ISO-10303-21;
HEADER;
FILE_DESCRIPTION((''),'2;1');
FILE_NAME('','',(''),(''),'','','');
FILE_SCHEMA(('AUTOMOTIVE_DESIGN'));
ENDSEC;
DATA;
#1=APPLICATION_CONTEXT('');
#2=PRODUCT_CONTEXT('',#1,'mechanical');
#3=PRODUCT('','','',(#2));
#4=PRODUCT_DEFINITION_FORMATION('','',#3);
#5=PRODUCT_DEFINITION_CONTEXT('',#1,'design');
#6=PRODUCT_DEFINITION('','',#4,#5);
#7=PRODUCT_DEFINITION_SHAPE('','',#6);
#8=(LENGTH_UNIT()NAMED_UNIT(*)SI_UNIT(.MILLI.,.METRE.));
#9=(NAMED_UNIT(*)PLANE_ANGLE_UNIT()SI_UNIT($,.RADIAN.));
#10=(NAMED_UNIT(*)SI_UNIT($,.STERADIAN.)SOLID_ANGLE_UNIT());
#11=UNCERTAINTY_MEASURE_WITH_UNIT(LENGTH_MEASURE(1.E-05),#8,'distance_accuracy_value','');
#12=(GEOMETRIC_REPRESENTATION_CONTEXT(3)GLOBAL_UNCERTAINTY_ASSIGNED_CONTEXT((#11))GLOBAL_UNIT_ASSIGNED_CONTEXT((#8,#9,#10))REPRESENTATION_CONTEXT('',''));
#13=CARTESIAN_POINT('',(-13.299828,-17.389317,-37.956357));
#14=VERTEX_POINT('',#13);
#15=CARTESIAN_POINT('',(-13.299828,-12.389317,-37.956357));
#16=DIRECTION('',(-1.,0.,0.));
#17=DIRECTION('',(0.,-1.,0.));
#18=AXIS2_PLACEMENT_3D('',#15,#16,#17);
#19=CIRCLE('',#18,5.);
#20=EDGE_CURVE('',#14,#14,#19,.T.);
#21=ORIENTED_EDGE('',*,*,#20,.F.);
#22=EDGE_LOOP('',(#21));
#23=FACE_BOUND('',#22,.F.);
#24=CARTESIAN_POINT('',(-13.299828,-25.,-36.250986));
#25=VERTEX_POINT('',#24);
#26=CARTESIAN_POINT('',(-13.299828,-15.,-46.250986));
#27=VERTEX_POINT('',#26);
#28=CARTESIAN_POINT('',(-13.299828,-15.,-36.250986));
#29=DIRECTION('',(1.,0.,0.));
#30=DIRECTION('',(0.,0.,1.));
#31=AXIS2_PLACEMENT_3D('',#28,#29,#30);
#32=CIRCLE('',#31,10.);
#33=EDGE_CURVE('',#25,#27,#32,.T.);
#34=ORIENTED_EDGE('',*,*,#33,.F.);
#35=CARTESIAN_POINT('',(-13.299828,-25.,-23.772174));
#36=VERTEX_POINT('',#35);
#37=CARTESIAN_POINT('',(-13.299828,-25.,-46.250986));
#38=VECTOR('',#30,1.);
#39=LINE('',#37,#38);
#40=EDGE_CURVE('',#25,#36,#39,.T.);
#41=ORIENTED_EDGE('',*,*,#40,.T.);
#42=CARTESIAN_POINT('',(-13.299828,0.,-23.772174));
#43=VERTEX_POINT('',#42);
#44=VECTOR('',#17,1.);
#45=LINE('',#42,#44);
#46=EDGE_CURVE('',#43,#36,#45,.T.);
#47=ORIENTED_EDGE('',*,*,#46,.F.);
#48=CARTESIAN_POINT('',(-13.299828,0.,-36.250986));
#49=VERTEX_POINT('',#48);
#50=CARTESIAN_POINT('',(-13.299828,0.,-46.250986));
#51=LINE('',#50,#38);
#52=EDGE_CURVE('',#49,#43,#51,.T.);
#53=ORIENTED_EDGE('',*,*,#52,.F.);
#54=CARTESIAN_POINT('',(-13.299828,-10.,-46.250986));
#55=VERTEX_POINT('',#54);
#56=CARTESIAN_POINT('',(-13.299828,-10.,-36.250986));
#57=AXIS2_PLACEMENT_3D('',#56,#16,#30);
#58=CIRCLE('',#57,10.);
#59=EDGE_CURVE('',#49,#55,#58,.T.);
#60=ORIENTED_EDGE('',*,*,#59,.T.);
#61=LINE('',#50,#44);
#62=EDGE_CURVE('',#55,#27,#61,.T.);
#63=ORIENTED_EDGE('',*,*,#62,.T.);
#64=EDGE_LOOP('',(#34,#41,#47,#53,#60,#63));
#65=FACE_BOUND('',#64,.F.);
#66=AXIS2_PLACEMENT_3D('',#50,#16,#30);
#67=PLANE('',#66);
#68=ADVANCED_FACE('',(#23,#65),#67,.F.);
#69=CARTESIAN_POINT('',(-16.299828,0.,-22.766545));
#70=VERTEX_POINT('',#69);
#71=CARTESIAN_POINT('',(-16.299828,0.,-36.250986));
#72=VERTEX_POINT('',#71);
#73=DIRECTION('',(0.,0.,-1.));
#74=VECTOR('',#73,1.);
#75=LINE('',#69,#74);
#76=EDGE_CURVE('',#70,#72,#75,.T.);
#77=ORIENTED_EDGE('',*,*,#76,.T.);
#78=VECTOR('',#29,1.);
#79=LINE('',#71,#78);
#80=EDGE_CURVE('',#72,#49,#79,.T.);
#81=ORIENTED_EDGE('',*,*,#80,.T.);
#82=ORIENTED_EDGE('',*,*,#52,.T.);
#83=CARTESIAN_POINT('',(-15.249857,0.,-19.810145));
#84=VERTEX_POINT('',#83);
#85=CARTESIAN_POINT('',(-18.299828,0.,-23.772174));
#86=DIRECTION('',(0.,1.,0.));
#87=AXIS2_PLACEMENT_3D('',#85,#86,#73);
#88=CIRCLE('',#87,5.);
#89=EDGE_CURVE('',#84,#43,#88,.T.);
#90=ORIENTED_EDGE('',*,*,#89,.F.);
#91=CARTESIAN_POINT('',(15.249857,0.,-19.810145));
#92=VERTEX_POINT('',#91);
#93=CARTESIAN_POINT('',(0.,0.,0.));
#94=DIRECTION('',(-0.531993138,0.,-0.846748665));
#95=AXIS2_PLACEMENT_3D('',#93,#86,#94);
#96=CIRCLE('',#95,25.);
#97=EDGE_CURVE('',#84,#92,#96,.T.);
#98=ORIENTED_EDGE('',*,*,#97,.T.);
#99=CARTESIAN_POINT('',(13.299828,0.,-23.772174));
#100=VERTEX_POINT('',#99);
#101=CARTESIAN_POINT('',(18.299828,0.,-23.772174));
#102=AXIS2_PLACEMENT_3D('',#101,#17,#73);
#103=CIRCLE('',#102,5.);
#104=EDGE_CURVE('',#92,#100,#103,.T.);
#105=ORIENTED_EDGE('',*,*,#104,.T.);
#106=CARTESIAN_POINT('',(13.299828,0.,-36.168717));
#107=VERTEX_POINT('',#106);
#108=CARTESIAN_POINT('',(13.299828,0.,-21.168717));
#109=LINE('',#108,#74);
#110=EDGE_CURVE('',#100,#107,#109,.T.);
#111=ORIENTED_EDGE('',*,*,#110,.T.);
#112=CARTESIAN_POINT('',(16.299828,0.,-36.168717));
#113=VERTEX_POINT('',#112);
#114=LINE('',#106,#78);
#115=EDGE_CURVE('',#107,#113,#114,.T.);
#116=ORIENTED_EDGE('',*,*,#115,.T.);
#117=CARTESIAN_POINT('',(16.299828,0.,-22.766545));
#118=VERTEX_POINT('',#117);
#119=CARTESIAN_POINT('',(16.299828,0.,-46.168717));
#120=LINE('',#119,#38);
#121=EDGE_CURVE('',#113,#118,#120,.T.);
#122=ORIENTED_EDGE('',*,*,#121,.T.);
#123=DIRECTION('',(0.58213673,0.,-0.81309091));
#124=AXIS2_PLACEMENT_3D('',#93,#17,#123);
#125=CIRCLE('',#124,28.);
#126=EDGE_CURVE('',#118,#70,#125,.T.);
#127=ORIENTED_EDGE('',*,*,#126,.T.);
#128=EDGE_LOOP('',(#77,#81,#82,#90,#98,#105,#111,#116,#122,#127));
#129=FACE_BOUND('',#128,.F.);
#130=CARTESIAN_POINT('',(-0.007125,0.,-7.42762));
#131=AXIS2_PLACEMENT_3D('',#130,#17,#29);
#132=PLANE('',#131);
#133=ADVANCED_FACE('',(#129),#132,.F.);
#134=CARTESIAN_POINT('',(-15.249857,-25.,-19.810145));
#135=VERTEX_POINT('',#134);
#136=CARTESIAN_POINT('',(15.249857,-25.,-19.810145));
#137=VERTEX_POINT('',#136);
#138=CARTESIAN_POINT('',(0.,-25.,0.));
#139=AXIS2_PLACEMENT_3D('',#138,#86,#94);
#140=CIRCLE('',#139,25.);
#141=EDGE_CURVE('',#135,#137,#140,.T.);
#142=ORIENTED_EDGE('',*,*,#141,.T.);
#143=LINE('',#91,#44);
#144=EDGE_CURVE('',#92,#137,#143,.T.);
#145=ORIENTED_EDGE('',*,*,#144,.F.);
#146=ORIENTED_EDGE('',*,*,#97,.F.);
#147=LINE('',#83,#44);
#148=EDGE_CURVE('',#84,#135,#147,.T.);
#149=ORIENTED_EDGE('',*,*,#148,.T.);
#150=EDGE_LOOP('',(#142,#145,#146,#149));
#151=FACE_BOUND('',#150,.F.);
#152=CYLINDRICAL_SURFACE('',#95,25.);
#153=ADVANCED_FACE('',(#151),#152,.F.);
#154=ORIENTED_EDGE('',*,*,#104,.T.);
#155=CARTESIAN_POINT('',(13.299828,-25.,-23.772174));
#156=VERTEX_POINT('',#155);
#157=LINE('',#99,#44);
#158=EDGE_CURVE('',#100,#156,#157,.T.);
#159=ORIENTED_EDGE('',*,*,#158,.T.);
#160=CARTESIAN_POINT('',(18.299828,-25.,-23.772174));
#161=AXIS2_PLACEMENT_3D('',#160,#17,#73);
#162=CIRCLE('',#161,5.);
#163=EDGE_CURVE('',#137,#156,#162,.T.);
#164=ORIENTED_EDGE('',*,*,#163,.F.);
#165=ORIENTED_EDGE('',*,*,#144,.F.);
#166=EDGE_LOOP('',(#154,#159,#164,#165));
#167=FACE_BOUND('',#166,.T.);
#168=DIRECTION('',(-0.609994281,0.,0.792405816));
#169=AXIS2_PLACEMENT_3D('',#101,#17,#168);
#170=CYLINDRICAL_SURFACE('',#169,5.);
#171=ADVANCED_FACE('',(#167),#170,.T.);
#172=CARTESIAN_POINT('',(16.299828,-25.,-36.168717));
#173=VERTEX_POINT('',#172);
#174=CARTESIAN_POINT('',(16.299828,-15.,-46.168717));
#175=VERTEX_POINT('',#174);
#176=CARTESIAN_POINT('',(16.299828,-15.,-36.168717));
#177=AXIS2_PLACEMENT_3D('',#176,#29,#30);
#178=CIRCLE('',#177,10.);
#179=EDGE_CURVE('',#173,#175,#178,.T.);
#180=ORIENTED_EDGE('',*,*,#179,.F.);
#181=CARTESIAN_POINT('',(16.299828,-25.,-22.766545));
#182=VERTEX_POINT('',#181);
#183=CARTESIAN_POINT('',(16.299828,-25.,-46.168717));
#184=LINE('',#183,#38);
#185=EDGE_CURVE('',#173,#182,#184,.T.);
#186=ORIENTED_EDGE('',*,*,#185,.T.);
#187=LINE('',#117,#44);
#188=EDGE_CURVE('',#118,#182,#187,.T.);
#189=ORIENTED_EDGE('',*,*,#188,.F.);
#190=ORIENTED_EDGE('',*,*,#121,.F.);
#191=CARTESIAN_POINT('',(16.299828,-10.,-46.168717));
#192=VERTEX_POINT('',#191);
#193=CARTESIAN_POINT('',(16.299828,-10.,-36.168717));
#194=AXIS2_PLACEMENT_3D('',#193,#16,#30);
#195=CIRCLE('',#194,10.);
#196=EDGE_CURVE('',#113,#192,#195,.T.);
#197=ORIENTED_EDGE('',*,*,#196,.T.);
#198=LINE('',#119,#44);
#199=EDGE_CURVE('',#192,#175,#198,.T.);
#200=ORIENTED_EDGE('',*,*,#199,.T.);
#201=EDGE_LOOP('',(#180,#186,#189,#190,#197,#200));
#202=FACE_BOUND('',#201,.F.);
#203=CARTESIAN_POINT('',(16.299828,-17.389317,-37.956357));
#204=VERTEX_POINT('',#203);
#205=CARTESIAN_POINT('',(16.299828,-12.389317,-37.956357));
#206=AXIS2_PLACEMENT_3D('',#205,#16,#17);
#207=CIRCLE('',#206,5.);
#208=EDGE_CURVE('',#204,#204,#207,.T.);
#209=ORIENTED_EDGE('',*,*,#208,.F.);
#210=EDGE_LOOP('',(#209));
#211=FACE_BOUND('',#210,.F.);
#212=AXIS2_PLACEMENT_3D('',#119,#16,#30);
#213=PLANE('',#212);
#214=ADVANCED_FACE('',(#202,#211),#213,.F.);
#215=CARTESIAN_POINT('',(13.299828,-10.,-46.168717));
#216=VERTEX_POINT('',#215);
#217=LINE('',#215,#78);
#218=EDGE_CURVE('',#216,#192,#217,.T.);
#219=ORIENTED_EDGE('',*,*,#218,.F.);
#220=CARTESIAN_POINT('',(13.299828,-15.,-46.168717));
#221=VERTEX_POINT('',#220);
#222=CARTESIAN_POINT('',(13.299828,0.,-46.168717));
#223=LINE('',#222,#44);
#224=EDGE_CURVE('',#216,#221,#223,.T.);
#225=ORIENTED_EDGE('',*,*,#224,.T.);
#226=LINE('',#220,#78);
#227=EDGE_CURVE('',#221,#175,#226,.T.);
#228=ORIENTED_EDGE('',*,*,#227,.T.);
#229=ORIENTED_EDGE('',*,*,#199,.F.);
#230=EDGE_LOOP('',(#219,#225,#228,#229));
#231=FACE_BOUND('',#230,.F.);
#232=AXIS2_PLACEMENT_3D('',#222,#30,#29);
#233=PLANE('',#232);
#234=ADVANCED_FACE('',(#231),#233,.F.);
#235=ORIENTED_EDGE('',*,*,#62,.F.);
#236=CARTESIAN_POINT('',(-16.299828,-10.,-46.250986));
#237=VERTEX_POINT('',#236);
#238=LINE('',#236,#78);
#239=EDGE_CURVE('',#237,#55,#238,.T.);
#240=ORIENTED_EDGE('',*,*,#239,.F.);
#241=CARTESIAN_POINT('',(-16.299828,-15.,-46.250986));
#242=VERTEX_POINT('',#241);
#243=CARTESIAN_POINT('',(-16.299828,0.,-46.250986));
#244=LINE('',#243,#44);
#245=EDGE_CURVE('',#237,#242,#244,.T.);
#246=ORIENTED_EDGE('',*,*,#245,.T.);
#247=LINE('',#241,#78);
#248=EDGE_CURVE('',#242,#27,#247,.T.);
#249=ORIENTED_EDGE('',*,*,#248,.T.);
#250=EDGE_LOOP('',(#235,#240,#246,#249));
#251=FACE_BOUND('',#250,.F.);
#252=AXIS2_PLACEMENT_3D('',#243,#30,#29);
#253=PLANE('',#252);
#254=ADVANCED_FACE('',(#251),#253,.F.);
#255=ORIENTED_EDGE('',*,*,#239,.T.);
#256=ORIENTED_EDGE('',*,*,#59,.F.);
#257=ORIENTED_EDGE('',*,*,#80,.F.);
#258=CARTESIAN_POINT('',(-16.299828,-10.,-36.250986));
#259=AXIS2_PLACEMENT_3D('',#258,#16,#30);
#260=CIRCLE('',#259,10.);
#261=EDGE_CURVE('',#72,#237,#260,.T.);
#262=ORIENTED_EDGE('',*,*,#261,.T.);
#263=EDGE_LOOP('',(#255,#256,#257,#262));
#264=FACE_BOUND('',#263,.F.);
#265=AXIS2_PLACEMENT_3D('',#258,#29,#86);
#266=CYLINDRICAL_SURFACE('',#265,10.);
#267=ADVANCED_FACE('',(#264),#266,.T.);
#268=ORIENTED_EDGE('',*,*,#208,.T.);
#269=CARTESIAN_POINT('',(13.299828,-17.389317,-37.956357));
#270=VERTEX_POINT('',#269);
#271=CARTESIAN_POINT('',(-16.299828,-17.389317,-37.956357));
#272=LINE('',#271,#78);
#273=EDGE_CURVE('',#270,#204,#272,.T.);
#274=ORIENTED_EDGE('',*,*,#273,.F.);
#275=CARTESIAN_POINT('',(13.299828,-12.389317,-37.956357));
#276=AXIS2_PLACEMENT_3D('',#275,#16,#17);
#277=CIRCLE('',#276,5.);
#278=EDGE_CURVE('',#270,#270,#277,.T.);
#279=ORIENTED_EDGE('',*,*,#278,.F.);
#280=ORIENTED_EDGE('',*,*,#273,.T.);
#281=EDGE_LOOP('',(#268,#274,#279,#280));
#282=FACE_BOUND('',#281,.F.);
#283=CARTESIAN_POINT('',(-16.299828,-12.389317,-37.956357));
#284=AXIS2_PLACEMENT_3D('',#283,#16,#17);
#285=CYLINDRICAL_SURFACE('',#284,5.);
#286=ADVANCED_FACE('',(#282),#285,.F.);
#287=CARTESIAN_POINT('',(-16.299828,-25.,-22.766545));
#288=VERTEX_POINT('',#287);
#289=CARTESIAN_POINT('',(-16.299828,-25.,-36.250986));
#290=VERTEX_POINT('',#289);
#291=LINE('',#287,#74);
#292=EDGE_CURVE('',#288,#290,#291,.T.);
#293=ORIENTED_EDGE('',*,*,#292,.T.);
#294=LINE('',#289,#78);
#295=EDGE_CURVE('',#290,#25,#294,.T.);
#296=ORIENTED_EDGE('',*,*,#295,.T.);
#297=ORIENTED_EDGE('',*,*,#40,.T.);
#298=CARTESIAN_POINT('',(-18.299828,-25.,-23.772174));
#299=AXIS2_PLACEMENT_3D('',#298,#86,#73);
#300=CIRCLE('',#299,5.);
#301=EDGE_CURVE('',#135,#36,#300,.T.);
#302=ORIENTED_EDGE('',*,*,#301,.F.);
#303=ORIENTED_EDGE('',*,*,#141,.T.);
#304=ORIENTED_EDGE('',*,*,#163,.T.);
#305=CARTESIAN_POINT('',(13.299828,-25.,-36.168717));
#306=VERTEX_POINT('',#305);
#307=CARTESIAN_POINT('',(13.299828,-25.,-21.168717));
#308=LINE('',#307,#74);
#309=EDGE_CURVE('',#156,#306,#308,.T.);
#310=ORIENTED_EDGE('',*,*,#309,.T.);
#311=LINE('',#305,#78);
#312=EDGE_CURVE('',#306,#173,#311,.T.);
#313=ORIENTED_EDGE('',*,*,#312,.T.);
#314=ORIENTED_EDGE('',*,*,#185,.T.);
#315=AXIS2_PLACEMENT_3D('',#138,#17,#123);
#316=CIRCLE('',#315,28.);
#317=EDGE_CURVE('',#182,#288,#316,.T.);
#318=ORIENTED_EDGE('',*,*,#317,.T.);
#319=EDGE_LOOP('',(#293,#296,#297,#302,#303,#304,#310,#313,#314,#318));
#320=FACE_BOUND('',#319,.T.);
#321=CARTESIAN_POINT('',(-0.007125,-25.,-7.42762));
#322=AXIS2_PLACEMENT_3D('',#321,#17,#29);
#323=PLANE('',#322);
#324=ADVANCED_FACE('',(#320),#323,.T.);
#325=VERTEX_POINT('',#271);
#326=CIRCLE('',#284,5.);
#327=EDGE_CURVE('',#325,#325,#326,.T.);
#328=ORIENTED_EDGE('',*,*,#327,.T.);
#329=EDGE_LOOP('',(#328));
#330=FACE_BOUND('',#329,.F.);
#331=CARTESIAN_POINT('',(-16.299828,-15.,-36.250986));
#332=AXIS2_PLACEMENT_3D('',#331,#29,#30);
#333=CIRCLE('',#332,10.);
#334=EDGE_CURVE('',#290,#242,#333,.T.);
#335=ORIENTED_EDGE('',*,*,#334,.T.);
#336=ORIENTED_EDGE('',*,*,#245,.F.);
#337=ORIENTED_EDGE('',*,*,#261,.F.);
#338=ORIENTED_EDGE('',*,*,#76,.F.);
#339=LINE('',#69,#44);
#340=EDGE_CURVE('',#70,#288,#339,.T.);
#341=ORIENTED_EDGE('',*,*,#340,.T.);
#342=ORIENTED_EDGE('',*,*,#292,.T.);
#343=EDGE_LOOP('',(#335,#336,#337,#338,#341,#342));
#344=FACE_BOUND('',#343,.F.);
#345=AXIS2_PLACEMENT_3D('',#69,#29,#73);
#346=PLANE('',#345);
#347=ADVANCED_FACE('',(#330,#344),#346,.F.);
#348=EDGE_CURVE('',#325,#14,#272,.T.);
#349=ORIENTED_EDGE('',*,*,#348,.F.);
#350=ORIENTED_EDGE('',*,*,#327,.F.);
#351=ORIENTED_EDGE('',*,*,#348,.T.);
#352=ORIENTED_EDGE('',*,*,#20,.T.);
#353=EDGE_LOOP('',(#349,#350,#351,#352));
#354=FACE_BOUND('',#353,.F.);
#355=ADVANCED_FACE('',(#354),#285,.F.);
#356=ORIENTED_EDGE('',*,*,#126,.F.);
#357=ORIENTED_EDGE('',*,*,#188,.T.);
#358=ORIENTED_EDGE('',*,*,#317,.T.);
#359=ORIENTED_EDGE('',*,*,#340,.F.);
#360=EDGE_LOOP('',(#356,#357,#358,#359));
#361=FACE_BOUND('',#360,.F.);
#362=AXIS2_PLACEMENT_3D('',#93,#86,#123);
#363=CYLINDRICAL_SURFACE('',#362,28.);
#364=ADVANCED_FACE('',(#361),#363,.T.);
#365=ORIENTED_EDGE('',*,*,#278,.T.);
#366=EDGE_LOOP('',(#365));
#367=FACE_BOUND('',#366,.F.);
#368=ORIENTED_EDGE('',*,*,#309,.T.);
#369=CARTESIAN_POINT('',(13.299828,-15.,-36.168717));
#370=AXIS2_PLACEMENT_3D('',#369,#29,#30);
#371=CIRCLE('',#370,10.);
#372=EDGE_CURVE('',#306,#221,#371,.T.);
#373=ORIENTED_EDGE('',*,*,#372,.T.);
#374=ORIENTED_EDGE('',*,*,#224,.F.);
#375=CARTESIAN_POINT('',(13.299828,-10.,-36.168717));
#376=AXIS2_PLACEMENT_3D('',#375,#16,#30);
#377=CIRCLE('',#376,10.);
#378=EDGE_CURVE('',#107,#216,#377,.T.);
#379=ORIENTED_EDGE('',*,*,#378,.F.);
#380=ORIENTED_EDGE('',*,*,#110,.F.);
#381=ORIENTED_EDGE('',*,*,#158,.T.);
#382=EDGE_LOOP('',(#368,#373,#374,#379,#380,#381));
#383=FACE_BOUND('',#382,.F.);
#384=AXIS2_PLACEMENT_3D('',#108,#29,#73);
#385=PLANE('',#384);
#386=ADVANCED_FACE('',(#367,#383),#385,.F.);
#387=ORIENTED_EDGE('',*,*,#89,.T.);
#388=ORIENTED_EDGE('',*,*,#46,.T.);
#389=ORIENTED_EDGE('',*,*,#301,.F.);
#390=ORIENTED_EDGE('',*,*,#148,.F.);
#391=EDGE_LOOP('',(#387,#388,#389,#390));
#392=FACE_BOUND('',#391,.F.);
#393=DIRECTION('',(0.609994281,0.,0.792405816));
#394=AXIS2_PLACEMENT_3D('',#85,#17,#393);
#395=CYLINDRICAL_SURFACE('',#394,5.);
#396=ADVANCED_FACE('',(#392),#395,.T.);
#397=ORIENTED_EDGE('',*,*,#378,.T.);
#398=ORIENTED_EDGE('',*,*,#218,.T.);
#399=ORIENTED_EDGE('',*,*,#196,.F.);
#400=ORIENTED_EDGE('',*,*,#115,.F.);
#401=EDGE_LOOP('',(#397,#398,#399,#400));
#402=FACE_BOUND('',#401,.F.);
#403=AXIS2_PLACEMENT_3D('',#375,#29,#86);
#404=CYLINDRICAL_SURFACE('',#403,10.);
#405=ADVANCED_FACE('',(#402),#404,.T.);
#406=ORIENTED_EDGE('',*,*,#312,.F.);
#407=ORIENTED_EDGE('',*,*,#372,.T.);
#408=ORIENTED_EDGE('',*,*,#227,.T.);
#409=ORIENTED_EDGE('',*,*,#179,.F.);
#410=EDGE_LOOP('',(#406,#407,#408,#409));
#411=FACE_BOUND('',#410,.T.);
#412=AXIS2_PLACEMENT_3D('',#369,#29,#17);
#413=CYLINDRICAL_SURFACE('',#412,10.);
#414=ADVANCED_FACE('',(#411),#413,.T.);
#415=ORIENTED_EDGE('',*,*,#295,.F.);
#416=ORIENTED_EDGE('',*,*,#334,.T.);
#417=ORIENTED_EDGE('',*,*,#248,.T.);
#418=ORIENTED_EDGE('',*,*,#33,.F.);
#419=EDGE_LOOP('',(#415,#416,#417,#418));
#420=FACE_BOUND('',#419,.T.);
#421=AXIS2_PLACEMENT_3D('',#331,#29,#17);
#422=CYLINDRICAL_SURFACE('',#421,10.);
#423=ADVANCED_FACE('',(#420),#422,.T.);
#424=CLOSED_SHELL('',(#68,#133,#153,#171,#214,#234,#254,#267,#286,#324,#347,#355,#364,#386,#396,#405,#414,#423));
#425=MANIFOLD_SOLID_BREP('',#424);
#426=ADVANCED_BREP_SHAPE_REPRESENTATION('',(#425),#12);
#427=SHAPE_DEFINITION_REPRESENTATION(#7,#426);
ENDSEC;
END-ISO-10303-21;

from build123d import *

# Parameters (mm, degrees)
F1_DEPTH = 25
F2_R     = 5
F3_R     = 5
F4_DEPTH = 42.9
F5_R     = 10


# Not quite as in the source:
# - a feature names something its author has since deleted; it is built from what else it names


with BuildPart() as f1:
    # F0 (on Front) → F1 (new body)
    with BuildSketch(Plane.XZ):
        with BuildLine():
            ThreePointArc((-13.2998284399, -21.1687166231), (0, 25), (13.2998284399, -21.1687166231))
            Line((13.2998284399, -21.1687166231), (13.2998284399, -46.1687166231))
            Line((13.2998284399, -46.1687166231), (16.2998284399, -46.1687166231))
            Line((16.2998284399, -46.1687166231), (16.2998284399, -22.7665454742))
            ThreePointArc((16.2998284399, -22.7665454742), (0, 28), (-16.2998284399, -22.7665454742))
            Line((-16.2998284399, -22.7665454742), (-16.2998284399, -46.2509857135))
            Line((-16.2998284399, -46.2509857135), (-13.2998284399, -46.2509857135))
            Line((-13.2998284399, -46.2509857135), (-13.2998284399, -21.1687166231))
        make_face()
    extrude(amount=F1_DEPTH)

    # F2
    f2_edges = [f1.edges().sort_by_distance(p)[0] for p in [
        (13.299828, -12.5, -21.168717),
        (-13.299828, -12.5, -21.168717),
    ]]
    fillet(f2_edges, radius=F2_R)

    # F3 (on face) → F4 (cut)
    with BuildSketch(Plane(origin=(-16.2998284399, 0, 0), x_dir=(0, -1, 0), z_dir=(-1, 0, 0))):
        with Locations((12.3893171549, -37.9563570023)):
            Circle(F3_R)
    extrude(amount=-F4_DEPTH, mode=Mode.SUBTRACT)

    # F5
    f5_edges = [f1.edges().sort_by_distance(p)[0] for p in [
        (-14.799828, 0, -46.250986),
        (-14.799828, -25, -46.250986),
        (14.799828, -25, -46.168717),
        (14.799828, 0, -46.168717),
    ]]
    fillet(f5_edges, radius=F5_R)


solid = f1.part
